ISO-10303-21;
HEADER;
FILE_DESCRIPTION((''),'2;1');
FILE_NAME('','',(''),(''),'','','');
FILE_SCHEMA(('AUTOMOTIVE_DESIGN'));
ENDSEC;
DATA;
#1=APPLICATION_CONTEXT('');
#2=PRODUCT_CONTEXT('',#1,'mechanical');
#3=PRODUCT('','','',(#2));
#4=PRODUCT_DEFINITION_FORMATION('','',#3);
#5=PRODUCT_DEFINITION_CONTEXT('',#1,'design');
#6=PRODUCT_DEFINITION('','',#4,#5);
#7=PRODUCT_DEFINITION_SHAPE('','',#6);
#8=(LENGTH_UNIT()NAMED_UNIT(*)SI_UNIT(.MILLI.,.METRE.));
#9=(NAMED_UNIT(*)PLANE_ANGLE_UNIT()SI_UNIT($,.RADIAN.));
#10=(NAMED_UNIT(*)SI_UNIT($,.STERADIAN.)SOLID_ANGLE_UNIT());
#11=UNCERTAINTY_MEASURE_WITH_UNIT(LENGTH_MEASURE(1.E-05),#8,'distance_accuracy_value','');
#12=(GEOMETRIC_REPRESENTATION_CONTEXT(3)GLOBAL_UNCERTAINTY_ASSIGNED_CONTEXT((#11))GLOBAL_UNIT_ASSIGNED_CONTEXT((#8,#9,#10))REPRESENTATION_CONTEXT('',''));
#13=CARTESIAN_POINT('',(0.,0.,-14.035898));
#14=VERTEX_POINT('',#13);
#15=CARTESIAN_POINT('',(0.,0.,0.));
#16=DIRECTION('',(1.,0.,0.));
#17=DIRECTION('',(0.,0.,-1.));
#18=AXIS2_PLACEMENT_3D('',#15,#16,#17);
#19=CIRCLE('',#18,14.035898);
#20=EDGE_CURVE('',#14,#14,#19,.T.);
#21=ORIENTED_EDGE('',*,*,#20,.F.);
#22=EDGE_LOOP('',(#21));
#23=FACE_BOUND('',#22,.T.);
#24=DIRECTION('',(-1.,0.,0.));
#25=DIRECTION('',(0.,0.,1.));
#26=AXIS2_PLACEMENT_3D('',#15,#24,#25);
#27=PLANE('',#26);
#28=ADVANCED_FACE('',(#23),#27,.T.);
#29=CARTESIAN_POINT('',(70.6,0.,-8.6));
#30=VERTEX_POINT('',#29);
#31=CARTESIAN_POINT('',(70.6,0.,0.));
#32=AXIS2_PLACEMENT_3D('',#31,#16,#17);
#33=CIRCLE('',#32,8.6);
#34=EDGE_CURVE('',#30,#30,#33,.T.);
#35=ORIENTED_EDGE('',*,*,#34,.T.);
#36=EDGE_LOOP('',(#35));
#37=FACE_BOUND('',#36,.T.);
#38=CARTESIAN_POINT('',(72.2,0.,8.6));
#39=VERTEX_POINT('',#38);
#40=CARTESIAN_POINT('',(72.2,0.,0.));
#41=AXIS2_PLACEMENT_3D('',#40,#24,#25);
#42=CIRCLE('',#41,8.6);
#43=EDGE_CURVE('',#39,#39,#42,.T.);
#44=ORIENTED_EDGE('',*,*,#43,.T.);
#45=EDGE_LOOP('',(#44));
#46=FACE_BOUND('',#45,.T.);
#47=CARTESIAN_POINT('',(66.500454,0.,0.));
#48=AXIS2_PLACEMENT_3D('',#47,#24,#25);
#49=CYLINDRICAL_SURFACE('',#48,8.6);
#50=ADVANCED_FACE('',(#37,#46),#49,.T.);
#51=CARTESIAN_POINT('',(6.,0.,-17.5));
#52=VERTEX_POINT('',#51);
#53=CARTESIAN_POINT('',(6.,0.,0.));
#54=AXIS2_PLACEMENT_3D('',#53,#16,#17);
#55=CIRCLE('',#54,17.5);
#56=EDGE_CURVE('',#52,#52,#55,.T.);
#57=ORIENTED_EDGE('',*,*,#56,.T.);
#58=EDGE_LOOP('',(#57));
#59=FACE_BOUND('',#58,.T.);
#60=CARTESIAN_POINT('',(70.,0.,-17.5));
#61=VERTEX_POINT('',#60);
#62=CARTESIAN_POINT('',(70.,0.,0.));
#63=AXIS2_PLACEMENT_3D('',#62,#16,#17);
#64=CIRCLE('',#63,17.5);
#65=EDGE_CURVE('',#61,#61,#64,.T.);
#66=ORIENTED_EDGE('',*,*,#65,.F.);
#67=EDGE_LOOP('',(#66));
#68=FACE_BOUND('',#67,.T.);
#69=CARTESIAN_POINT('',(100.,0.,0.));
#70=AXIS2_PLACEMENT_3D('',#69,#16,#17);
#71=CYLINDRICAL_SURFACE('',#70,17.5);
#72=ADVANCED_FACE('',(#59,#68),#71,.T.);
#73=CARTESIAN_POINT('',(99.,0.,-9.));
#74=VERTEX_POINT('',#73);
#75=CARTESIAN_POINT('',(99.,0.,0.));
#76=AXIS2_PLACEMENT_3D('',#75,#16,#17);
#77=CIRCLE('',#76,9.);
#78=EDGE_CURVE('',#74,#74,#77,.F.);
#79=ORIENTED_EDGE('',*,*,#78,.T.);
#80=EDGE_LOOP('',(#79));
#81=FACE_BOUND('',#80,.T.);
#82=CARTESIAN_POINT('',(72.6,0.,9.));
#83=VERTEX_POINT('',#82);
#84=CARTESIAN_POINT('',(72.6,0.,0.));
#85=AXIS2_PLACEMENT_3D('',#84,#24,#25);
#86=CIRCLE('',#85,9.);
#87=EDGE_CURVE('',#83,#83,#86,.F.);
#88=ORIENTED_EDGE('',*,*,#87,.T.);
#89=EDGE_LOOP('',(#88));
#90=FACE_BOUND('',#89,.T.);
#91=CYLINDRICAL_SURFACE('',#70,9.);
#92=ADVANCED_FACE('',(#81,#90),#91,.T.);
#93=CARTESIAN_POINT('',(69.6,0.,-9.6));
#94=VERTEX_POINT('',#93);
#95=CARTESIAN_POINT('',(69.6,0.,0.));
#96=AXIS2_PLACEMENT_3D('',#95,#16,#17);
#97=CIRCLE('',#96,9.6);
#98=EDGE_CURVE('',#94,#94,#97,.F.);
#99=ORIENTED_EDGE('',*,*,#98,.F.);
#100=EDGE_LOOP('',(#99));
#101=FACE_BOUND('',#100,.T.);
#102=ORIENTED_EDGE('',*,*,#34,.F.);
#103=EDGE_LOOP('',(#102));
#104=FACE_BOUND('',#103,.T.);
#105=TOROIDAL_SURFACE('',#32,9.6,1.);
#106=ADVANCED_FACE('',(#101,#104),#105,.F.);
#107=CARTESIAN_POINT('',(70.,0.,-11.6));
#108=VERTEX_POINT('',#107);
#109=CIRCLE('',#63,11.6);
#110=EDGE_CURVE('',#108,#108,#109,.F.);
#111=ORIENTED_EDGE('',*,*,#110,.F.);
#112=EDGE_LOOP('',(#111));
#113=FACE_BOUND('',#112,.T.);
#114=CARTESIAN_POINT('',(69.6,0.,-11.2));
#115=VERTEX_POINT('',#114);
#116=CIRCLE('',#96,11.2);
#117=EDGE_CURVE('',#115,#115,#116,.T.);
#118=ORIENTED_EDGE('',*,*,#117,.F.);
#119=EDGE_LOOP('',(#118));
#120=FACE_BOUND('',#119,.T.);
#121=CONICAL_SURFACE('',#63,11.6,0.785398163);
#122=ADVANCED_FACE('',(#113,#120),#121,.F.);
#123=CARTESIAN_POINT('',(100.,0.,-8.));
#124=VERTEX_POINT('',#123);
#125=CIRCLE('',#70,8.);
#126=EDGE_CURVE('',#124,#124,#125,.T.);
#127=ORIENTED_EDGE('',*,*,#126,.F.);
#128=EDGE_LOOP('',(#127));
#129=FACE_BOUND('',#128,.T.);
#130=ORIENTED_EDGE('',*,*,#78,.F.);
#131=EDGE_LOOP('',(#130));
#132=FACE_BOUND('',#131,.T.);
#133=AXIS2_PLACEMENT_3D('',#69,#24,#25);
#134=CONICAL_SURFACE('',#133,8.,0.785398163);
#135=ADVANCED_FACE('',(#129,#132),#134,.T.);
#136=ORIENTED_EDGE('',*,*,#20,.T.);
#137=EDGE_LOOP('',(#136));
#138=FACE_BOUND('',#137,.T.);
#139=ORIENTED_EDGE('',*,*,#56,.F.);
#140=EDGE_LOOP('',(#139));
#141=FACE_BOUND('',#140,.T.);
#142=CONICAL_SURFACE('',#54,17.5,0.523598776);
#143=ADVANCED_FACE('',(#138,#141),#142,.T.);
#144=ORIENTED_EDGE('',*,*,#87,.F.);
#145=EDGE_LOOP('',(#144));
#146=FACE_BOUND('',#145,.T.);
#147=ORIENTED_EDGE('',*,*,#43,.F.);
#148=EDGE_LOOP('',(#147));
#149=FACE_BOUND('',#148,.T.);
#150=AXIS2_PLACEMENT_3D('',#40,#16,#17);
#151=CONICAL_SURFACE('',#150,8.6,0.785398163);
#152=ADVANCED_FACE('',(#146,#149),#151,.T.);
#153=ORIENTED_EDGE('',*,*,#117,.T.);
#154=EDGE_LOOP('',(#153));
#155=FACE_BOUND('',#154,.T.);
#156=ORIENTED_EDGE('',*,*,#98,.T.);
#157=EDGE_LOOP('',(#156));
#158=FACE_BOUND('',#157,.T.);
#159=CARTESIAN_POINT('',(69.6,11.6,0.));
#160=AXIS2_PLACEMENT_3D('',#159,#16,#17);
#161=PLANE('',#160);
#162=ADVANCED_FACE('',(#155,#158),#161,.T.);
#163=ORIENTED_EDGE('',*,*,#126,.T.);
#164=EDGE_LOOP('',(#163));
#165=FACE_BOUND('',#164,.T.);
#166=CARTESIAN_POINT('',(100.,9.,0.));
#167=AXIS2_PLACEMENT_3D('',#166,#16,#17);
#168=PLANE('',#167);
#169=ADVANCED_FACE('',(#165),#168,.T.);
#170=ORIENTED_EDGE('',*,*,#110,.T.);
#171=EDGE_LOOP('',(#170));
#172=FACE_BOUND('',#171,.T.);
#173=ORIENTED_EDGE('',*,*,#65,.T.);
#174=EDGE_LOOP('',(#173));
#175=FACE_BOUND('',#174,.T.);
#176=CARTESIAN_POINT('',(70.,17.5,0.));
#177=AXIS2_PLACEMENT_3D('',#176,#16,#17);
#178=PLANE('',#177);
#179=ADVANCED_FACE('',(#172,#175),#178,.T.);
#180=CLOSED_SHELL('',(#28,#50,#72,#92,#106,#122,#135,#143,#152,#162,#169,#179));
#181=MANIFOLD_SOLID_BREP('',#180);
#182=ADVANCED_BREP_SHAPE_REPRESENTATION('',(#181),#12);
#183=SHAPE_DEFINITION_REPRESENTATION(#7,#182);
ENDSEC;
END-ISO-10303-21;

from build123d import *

# Parameters (mm, degrees)
CHAMFER_1_SIZE = 1
SKETCH_4_W     = 3
SKETCH_4_H     = 3
FILLET_1_R     = 1
CHAMFER_2_SIZE = 0.4


with BuildPart() as part:
    # 草图3 → 旋转1 (revolve)
    with BuildSketch(Plane.XY, mode=Mode.PRIVATE) as revolve_1_sk:
        Polygon((0, 0), (0, 14.035898385), (6, 17.5), (70, 17.5), (70, 9), (100, 9), (100, 0), align=None)
    revolve(revolve_1_sk.sketch.rotate(Axis((100, 0, 0), (-1, 0, 0)), 90), axis=Axis((100, 0, 0), (-1, 0, 0)))

    # 倒角1
    chamfer_1_edges = [part.edges().sort_by_distance(p)[0] for p in [
        (100, 0, 9),
    ]]
    chamfer(chamfer_1_edges, length=CHAMFER_1_SIZE)

    # 草图4 → 切除-旋转1 (revolve, cut)
    with BuildSketch(Plane.XY, mode=Mode.PRIVATE) as cut_revolve_1_sk:
        with Locations((71.1, 10.1)):
            Rectangle(SKETCH_4_W, SKETCH_4_H)
    revolve(cut_revolve_1_sk.sketch.rotate(Axis((66.500454026, 0, 0), (1, 0, 0)), 90), axis=Axis((66.500454026, 0, 0), (1, 0, 0)), mode=Mode.SUBTRACT)

    # 圆角1
    fillet_1_edges = [part.edges().sort_by_distance(p)[0] for p in [
        (69.6, 0, -8.6),
    ]]
    fillet(fillet_1_edges, radius=FILLET_1_R)

    # 倒角2
    chamfer_2_edges = [part.edges().sort_by_distance(p)[0] for p in [
        (72.6, 0, -8.6),
        (69.6, 0, -11.6),
    ]]
    chamfer(chamfer_2_edges, length=CHAMFER_2_SIZE - 0.0001)  # a hair under: the kernel refuses the full size


solid = part.part
